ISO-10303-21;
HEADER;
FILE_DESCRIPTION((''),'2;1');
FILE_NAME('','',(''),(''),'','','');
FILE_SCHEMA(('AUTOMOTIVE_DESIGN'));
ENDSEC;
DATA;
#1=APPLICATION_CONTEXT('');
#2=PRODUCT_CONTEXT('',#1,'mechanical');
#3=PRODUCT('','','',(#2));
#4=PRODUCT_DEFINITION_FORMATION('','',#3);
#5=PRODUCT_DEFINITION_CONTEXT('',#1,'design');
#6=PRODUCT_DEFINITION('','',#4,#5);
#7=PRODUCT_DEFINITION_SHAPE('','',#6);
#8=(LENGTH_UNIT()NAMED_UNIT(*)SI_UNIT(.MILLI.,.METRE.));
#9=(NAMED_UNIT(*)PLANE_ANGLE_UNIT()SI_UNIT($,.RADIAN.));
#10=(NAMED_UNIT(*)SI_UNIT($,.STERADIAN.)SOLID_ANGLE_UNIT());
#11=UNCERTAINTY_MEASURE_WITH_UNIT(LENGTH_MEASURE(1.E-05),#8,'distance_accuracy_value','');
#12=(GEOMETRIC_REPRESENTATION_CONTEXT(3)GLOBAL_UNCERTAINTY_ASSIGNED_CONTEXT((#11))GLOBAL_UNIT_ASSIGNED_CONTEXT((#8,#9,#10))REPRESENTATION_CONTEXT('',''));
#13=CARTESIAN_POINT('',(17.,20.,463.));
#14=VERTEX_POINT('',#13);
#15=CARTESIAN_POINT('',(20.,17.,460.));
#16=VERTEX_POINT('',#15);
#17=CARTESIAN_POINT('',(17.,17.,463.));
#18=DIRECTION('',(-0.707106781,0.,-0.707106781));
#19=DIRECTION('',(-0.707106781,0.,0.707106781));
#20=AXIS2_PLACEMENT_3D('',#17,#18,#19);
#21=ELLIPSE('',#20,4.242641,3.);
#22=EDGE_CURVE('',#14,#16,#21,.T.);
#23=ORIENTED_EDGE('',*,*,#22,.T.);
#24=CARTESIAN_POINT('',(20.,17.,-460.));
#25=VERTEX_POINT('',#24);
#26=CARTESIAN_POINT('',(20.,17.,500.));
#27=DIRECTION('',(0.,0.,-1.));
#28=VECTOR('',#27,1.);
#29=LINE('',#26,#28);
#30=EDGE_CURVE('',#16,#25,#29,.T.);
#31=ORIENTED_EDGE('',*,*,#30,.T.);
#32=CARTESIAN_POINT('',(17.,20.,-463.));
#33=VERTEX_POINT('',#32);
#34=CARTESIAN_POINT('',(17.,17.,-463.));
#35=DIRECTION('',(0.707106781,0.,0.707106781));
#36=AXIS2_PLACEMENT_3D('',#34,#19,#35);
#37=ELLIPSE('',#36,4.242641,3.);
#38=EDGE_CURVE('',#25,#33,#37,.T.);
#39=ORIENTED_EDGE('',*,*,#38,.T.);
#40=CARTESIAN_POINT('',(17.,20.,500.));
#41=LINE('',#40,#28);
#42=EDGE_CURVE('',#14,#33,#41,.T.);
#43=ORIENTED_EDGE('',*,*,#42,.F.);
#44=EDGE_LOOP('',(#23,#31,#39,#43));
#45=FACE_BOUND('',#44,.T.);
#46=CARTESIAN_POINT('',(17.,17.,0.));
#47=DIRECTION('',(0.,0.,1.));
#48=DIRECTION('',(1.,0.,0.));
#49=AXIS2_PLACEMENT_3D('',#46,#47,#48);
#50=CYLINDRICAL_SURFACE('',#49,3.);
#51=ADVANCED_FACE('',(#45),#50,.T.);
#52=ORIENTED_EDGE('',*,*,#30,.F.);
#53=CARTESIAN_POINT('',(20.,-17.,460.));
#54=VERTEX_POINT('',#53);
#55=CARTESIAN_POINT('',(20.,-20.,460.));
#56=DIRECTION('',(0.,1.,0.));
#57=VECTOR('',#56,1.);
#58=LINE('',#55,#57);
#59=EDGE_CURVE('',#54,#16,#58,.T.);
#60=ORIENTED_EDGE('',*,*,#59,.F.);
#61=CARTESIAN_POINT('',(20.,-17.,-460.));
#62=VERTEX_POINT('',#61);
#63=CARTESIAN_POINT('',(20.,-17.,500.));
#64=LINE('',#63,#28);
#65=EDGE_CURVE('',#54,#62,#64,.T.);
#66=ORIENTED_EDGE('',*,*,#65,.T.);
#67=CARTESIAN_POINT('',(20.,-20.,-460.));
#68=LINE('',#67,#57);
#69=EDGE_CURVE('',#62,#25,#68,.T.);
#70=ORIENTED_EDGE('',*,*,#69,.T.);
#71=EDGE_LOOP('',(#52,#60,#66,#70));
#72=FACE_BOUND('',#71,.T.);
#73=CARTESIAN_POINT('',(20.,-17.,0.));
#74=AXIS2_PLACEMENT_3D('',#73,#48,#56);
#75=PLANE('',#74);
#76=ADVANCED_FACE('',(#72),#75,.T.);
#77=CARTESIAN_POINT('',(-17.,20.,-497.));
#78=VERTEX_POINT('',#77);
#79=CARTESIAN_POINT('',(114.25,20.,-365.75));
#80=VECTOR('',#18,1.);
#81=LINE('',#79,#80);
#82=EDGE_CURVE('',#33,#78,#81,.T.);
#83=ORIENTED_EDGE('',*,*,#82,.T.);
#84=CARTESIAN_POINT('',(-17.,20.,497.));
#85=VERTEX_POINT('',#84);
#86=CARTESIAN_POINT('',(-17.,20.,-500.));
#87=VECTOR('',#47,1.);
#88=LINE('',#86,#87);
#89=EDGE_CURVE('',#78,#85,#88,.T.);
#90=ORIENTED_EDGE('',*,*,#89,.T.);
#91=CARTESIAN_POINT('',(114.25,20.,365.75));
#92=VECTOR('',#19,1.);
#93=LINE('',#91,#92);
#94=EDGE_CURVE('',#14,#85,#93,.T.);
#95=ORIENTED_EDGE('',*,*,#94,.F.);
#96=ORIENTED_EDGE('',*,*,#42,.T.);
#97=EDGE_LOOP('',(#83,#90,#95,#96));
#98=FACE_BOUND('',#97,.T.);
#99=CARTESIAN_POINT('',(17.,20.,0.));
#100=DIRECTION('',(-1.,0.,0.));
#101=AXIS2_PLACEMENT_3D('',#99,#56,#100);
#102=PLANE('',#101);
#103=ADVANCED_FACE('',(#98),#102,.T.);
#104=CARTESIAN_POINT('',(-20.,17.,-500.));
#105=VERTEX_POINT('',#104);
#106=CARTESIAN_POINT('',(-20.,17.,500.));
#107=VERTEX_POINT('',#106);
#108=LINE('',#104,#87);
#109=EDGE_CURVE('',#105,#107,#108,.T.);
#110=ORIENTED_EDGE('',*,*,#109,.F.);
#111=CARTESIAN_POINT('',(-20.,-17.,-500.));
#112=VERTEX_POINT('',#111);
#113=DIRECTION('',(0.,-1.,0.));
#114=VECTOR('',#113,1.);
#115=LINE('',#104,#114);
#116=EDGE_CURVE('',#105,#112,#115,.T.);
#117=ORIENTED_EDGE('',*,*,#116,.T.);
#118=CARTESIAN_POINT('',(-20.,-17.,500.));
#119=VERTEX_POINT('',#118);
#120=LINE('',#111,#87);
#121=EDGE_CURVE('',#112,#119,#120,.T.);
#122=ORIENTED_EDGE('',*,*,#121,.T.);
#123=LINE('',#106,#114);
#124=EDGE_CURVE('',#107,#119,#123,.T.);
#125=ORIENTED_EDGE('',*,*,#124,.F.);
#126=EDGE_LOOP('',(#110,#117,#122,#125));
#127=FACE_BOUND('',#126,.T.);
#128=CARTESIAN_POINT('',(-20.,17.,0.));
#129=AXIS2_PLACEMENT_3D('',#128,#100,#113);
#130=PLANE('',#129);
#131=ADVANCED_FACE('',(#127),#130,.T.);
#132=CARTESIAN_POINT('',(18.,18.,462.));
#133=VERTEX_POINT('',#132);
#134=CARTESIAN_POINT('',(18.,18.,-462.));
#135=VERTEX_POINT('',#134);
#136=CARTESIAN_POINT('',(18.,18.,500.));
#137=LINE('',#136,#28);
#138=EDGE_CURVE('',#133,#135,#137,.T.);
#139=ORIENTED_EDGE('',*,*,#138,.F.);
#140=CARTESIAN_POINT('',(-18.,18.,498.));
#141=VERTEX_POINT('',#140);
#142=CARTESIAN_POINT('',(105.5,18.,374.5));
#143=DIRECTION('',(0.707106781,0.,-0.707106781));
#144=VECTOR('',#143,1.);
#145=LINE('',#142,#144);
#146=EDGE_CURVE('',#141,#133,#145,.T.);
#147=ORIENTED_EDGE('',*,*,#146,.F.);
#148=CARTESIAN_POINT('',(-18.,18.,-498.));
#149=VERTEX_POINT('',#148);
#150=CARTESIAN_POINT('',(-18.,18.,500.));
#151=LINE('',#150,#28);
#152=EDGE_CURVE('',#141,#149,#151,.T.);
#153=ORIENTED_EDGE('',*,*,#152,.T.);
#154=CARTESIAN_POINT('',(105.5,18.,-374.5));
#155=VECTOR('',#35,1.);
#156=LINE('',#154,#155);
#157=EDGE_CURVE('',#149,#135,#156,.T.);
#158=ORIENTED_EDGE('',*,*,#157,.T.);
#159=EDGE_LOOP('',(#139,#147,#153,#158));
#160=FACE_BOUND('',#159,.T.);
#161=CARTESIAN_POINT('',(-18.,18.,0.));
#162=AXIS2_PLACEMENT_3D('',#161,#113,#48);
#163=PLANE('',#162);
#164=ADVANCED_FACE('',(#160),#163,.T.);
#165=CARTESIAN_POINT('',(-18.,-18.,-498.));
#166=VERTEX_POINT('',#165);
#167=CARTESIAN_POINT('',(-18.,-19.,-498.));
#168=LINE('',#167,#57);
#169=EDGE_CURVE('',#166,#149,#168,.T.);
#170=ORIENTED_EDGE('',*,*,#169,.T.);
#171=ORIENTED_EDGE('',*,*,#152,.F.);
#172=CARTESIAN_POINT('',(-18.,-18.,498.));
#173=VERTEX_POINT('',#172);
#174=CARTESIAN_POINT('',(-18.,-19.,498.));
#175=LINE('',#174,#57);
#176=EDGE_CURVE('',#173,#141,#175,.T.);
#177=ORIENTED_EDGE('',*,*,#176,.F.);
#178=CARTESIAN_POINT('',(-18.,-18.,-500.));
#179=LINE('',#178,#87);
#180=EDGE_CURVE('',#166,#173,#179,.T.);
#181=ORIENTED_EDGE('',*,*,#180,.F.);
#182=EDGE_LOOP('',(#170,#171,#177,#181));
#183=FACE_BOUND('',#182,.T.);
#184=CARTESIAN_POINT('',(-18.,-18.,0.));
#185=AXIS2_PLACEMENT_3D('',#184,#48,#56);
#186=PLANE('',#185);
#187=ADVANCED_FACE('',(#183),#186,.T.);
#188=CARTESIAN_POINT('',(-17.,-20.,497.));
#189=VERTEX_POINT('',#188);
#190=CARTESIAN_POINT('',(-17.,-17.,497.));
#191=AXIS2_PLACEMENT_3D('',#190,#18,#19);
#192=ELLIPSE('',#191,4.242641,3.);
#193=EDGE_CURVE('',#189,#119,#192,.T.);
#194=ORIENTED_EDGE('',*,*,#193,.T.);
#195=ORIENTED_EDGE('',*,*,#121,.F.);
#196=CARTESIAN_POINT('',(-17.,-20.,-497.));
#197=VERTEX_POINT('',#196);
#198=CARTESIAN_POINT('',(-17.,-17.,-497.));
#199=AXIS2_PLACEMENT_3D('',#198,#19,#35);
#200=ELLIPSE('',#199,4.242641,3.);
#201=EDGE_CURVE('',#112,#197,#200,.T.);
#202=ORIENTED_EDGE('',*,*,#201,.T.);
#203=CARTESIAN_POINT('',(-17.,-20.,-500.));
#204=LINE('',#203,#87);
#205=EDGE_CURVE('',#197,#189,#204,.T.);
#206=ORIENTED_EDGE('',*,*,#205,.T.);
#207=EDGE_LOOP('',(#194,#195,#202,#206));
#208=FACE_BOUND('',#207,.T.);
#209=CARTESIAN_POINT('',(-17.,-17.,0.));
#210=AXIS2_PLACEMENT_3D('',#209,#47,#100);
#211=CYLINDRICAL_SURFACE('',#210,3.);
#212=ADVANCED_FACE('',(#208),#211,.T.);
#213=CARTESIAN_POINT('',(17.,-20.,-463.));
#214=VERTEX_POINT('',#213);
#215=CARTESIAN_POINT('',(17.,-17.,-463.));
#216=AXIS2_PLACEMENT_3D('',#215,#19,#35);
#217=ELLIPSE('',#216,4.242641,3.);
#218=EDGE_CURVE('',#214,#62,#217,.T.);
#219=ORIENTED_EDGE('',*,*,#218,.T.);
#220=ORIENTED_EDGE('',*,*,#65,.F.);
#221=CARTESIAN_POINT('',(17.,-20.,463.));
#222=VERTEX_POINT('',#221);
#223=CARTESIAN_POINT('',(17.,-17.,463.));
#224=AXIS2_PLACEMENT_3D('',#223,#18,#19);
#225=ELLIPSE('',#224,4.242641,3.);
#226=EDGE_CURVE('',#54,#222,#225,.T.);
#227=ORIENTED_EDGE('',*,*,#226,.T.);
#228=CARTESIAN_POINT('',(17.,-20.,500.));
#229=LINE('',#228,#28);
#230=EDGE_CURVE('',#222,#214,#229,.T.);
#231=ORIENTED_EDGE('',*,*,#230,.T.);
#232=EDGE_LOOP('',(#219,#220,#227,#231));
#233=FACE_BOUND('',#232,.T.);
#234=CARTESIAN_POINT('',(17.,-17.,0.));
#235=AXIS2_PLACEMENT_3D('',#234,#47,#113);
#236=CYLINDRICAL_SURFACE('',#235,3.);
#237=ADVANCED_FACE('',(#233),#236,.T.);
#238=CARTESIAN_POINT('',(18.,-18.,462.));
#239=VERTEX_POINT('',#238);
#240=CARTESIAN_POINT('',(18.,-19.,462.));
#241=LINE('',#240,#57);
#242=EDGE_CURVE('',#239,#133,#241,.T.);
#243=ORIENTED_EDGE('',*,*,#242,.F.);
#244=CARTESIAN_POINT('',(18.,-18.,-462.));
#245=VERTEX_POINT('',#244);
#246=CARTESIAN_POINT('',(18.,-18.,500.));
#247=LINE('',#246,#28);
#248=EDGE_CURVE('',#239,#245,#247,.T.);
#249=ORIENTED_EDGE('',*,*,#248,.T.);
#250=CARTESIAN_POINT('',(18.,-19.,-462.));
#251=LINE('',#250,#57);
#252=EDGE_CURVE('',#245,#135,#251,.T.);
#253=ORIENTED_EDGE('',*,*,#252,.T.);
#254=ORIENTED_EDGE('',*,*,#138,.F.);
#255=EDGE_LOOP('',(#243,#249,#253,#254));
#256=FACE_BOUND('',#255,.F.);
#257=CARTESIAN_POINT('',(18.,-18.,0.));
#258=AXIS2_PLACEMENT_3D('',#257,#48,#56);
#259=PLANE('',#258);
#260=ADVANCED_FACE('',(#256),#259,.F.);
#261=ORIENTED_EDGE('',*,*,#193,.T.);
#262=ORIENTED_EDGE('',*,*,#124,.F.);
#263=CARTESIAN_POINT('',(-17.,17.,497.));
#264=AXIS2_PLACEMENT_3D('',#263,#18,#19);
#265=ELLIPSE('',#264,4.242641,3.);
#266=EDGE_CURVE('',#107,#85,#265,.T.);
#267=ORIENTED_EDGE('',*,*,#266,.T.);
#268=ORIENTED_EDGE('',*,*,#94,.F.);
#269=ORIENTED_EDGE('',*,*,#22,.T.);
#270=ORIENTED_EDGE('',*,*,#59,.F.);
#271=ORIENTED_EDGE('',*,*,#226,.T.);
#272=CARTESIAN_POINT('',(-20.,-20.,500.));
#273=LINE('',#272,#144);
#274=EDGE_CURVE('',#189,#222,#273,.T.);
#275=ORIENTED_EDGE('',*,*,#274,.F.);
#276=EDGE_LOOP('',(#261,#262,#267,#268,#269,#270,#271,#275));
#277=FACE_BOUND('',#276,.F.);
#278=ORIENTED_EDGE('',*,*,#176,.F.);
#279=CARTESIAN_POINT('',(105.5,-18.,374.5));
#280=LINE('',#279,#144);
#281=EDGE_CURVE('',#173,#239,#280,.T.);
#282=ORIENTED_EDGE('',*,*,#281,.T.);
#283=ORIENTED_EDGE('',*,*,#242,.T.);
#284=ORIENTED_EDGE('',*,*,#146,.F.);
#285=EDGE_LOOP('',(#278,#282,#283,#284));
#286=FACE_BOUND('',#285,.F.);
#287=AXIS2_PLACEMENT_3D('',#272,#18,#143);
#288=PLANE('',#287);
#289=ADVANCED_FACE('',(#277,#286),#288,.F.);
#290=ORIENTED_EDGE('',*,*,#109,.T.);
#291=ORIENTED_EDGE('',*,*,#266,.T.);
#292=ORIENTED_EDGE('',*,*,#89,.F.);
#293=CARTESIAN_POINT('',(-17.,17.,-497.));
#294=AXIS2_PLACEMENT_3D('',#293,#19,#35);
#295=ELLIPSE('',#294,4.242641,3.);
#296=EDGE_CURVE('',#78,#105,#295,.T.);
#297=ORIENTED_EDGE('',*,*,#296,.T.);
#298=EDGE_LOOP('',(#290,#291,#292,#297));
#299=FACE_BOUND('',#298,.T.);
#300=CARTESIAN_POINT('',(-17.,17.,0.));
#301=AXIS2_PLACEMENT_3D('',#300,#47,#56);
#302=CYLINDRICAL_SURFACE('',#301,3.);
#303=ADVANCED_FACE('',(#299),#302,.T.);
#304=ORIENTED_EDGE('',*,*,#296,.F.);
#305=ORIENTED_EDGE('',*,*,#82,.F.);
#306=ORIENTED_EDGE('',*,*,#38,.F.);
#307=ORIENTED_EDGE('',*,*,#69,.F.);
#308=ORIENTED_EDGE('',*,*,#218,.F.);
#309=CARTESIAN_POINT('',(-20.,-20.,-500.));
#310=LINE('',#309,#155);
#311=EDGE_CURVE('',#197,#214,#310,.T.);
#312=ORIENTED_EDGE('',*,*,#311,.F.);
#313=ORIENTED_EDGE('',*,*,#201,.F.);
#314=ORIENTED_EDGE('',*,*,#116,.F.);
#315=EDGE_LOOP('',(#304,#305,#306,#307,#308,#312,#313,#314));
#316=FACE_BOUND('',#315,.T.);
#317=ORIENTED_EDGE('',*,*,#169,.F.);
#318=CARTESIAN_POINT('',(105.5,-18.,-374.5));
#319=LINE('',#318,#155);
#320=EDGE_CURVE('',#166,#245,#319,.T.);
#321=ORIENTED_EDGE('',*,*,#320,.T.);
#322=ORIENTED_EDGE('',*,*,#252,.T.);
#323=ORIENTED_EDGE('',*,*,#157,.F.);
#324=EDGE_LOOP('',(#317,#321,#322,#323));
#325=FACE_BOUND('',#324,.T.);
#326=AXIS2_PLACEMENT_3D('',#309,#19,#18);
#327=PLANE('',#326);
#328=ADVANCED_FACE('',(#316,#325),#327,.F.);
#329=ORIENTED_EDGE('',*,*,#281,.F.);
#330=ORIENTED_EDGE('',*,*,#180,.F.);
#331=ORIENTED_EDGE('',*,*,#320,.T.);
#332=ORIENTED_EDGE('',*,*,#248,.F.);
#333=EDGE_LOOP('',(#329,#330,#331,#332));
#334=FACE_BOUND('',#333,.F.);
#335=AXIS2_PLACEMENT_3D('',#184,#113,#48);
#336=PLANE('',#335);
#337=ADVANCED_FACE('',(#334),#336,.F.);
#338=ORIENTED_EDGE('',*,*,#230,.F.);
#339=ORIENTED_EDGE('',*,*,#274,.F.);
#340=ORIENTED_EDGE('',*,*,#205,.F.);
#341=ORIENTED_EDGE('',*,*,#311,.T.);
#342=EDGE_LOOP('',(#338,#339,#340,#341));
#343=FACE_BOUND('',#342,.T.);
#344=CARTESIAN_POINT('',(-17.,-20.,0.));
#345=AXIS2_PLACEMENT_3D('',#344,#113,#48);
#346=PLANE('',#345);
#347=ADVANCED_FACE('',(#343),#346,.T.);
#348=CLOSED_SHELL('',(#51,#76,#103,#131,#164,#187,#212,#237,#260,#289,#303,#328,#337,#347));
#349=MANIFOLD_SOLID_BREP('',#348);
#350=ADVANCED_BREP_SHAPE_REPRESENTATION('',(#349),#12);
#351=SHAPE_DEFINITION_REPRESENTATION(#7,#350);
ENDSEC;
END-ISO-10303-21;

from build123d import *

# Parameters (mm, degrees)
F0_W     = 36
F0_H     = 36
F1_DEPTH = 500
F3_DEPTH = 40.001


# Not quite as in the source:
# - a pattern or mirror of a feature is missing from the dataset's text; its kind, count and spacing are read off the source's solid


with BuildPart() as f1:
    # F0 (on Top) → F1 (new body, symmetric)
    with BuildSketch(Plane.XY):
        with BuildLine():
            Line((17, 20), (-17, 20))
            ThreePointArc((-17, 20), (-19.1213203436, 19.1213203436), (-20, 17))
            Line((-20, 17), (-20, -17))
            ThreePointArc((-20, -17), (-19.1213203436, -19.1213203436), (-17, -20))
            Line((-17, -20), (17, -20))
            ThreePointArc((17, -20), (19.1213203436, -19.1213203436), (20, -17))
            Line((20, -17), (20, 17))
            ThreePointArc((20, 17), (19.1213203436, 19.1213203436), (17, 20))
        make_face()
        Rectangle(F0_W, F0_H, mode=Mode.SUBTRACT)
    extrude(amount=F1_DEPTH, both=True)

    # F2 (on face) → F3 (cut, through all)
    with BuildSketch(Plane.XZ.offset(20)):
        Polygon((20, 500), (-20, 500), (20, 460), align=None)
    f3 = extrude(amount=-F3_DEPTH, mode=Mode.SUBTRACT)

    # F3_copies: F3 across plane
    add(f3.mirror(Plane(origin=(0, 0, 0), x_dir=(-1, 0, 0), z_dir=(0, 0, -1))), mode=Mode.SUBTRACT)


solid = f1.part
